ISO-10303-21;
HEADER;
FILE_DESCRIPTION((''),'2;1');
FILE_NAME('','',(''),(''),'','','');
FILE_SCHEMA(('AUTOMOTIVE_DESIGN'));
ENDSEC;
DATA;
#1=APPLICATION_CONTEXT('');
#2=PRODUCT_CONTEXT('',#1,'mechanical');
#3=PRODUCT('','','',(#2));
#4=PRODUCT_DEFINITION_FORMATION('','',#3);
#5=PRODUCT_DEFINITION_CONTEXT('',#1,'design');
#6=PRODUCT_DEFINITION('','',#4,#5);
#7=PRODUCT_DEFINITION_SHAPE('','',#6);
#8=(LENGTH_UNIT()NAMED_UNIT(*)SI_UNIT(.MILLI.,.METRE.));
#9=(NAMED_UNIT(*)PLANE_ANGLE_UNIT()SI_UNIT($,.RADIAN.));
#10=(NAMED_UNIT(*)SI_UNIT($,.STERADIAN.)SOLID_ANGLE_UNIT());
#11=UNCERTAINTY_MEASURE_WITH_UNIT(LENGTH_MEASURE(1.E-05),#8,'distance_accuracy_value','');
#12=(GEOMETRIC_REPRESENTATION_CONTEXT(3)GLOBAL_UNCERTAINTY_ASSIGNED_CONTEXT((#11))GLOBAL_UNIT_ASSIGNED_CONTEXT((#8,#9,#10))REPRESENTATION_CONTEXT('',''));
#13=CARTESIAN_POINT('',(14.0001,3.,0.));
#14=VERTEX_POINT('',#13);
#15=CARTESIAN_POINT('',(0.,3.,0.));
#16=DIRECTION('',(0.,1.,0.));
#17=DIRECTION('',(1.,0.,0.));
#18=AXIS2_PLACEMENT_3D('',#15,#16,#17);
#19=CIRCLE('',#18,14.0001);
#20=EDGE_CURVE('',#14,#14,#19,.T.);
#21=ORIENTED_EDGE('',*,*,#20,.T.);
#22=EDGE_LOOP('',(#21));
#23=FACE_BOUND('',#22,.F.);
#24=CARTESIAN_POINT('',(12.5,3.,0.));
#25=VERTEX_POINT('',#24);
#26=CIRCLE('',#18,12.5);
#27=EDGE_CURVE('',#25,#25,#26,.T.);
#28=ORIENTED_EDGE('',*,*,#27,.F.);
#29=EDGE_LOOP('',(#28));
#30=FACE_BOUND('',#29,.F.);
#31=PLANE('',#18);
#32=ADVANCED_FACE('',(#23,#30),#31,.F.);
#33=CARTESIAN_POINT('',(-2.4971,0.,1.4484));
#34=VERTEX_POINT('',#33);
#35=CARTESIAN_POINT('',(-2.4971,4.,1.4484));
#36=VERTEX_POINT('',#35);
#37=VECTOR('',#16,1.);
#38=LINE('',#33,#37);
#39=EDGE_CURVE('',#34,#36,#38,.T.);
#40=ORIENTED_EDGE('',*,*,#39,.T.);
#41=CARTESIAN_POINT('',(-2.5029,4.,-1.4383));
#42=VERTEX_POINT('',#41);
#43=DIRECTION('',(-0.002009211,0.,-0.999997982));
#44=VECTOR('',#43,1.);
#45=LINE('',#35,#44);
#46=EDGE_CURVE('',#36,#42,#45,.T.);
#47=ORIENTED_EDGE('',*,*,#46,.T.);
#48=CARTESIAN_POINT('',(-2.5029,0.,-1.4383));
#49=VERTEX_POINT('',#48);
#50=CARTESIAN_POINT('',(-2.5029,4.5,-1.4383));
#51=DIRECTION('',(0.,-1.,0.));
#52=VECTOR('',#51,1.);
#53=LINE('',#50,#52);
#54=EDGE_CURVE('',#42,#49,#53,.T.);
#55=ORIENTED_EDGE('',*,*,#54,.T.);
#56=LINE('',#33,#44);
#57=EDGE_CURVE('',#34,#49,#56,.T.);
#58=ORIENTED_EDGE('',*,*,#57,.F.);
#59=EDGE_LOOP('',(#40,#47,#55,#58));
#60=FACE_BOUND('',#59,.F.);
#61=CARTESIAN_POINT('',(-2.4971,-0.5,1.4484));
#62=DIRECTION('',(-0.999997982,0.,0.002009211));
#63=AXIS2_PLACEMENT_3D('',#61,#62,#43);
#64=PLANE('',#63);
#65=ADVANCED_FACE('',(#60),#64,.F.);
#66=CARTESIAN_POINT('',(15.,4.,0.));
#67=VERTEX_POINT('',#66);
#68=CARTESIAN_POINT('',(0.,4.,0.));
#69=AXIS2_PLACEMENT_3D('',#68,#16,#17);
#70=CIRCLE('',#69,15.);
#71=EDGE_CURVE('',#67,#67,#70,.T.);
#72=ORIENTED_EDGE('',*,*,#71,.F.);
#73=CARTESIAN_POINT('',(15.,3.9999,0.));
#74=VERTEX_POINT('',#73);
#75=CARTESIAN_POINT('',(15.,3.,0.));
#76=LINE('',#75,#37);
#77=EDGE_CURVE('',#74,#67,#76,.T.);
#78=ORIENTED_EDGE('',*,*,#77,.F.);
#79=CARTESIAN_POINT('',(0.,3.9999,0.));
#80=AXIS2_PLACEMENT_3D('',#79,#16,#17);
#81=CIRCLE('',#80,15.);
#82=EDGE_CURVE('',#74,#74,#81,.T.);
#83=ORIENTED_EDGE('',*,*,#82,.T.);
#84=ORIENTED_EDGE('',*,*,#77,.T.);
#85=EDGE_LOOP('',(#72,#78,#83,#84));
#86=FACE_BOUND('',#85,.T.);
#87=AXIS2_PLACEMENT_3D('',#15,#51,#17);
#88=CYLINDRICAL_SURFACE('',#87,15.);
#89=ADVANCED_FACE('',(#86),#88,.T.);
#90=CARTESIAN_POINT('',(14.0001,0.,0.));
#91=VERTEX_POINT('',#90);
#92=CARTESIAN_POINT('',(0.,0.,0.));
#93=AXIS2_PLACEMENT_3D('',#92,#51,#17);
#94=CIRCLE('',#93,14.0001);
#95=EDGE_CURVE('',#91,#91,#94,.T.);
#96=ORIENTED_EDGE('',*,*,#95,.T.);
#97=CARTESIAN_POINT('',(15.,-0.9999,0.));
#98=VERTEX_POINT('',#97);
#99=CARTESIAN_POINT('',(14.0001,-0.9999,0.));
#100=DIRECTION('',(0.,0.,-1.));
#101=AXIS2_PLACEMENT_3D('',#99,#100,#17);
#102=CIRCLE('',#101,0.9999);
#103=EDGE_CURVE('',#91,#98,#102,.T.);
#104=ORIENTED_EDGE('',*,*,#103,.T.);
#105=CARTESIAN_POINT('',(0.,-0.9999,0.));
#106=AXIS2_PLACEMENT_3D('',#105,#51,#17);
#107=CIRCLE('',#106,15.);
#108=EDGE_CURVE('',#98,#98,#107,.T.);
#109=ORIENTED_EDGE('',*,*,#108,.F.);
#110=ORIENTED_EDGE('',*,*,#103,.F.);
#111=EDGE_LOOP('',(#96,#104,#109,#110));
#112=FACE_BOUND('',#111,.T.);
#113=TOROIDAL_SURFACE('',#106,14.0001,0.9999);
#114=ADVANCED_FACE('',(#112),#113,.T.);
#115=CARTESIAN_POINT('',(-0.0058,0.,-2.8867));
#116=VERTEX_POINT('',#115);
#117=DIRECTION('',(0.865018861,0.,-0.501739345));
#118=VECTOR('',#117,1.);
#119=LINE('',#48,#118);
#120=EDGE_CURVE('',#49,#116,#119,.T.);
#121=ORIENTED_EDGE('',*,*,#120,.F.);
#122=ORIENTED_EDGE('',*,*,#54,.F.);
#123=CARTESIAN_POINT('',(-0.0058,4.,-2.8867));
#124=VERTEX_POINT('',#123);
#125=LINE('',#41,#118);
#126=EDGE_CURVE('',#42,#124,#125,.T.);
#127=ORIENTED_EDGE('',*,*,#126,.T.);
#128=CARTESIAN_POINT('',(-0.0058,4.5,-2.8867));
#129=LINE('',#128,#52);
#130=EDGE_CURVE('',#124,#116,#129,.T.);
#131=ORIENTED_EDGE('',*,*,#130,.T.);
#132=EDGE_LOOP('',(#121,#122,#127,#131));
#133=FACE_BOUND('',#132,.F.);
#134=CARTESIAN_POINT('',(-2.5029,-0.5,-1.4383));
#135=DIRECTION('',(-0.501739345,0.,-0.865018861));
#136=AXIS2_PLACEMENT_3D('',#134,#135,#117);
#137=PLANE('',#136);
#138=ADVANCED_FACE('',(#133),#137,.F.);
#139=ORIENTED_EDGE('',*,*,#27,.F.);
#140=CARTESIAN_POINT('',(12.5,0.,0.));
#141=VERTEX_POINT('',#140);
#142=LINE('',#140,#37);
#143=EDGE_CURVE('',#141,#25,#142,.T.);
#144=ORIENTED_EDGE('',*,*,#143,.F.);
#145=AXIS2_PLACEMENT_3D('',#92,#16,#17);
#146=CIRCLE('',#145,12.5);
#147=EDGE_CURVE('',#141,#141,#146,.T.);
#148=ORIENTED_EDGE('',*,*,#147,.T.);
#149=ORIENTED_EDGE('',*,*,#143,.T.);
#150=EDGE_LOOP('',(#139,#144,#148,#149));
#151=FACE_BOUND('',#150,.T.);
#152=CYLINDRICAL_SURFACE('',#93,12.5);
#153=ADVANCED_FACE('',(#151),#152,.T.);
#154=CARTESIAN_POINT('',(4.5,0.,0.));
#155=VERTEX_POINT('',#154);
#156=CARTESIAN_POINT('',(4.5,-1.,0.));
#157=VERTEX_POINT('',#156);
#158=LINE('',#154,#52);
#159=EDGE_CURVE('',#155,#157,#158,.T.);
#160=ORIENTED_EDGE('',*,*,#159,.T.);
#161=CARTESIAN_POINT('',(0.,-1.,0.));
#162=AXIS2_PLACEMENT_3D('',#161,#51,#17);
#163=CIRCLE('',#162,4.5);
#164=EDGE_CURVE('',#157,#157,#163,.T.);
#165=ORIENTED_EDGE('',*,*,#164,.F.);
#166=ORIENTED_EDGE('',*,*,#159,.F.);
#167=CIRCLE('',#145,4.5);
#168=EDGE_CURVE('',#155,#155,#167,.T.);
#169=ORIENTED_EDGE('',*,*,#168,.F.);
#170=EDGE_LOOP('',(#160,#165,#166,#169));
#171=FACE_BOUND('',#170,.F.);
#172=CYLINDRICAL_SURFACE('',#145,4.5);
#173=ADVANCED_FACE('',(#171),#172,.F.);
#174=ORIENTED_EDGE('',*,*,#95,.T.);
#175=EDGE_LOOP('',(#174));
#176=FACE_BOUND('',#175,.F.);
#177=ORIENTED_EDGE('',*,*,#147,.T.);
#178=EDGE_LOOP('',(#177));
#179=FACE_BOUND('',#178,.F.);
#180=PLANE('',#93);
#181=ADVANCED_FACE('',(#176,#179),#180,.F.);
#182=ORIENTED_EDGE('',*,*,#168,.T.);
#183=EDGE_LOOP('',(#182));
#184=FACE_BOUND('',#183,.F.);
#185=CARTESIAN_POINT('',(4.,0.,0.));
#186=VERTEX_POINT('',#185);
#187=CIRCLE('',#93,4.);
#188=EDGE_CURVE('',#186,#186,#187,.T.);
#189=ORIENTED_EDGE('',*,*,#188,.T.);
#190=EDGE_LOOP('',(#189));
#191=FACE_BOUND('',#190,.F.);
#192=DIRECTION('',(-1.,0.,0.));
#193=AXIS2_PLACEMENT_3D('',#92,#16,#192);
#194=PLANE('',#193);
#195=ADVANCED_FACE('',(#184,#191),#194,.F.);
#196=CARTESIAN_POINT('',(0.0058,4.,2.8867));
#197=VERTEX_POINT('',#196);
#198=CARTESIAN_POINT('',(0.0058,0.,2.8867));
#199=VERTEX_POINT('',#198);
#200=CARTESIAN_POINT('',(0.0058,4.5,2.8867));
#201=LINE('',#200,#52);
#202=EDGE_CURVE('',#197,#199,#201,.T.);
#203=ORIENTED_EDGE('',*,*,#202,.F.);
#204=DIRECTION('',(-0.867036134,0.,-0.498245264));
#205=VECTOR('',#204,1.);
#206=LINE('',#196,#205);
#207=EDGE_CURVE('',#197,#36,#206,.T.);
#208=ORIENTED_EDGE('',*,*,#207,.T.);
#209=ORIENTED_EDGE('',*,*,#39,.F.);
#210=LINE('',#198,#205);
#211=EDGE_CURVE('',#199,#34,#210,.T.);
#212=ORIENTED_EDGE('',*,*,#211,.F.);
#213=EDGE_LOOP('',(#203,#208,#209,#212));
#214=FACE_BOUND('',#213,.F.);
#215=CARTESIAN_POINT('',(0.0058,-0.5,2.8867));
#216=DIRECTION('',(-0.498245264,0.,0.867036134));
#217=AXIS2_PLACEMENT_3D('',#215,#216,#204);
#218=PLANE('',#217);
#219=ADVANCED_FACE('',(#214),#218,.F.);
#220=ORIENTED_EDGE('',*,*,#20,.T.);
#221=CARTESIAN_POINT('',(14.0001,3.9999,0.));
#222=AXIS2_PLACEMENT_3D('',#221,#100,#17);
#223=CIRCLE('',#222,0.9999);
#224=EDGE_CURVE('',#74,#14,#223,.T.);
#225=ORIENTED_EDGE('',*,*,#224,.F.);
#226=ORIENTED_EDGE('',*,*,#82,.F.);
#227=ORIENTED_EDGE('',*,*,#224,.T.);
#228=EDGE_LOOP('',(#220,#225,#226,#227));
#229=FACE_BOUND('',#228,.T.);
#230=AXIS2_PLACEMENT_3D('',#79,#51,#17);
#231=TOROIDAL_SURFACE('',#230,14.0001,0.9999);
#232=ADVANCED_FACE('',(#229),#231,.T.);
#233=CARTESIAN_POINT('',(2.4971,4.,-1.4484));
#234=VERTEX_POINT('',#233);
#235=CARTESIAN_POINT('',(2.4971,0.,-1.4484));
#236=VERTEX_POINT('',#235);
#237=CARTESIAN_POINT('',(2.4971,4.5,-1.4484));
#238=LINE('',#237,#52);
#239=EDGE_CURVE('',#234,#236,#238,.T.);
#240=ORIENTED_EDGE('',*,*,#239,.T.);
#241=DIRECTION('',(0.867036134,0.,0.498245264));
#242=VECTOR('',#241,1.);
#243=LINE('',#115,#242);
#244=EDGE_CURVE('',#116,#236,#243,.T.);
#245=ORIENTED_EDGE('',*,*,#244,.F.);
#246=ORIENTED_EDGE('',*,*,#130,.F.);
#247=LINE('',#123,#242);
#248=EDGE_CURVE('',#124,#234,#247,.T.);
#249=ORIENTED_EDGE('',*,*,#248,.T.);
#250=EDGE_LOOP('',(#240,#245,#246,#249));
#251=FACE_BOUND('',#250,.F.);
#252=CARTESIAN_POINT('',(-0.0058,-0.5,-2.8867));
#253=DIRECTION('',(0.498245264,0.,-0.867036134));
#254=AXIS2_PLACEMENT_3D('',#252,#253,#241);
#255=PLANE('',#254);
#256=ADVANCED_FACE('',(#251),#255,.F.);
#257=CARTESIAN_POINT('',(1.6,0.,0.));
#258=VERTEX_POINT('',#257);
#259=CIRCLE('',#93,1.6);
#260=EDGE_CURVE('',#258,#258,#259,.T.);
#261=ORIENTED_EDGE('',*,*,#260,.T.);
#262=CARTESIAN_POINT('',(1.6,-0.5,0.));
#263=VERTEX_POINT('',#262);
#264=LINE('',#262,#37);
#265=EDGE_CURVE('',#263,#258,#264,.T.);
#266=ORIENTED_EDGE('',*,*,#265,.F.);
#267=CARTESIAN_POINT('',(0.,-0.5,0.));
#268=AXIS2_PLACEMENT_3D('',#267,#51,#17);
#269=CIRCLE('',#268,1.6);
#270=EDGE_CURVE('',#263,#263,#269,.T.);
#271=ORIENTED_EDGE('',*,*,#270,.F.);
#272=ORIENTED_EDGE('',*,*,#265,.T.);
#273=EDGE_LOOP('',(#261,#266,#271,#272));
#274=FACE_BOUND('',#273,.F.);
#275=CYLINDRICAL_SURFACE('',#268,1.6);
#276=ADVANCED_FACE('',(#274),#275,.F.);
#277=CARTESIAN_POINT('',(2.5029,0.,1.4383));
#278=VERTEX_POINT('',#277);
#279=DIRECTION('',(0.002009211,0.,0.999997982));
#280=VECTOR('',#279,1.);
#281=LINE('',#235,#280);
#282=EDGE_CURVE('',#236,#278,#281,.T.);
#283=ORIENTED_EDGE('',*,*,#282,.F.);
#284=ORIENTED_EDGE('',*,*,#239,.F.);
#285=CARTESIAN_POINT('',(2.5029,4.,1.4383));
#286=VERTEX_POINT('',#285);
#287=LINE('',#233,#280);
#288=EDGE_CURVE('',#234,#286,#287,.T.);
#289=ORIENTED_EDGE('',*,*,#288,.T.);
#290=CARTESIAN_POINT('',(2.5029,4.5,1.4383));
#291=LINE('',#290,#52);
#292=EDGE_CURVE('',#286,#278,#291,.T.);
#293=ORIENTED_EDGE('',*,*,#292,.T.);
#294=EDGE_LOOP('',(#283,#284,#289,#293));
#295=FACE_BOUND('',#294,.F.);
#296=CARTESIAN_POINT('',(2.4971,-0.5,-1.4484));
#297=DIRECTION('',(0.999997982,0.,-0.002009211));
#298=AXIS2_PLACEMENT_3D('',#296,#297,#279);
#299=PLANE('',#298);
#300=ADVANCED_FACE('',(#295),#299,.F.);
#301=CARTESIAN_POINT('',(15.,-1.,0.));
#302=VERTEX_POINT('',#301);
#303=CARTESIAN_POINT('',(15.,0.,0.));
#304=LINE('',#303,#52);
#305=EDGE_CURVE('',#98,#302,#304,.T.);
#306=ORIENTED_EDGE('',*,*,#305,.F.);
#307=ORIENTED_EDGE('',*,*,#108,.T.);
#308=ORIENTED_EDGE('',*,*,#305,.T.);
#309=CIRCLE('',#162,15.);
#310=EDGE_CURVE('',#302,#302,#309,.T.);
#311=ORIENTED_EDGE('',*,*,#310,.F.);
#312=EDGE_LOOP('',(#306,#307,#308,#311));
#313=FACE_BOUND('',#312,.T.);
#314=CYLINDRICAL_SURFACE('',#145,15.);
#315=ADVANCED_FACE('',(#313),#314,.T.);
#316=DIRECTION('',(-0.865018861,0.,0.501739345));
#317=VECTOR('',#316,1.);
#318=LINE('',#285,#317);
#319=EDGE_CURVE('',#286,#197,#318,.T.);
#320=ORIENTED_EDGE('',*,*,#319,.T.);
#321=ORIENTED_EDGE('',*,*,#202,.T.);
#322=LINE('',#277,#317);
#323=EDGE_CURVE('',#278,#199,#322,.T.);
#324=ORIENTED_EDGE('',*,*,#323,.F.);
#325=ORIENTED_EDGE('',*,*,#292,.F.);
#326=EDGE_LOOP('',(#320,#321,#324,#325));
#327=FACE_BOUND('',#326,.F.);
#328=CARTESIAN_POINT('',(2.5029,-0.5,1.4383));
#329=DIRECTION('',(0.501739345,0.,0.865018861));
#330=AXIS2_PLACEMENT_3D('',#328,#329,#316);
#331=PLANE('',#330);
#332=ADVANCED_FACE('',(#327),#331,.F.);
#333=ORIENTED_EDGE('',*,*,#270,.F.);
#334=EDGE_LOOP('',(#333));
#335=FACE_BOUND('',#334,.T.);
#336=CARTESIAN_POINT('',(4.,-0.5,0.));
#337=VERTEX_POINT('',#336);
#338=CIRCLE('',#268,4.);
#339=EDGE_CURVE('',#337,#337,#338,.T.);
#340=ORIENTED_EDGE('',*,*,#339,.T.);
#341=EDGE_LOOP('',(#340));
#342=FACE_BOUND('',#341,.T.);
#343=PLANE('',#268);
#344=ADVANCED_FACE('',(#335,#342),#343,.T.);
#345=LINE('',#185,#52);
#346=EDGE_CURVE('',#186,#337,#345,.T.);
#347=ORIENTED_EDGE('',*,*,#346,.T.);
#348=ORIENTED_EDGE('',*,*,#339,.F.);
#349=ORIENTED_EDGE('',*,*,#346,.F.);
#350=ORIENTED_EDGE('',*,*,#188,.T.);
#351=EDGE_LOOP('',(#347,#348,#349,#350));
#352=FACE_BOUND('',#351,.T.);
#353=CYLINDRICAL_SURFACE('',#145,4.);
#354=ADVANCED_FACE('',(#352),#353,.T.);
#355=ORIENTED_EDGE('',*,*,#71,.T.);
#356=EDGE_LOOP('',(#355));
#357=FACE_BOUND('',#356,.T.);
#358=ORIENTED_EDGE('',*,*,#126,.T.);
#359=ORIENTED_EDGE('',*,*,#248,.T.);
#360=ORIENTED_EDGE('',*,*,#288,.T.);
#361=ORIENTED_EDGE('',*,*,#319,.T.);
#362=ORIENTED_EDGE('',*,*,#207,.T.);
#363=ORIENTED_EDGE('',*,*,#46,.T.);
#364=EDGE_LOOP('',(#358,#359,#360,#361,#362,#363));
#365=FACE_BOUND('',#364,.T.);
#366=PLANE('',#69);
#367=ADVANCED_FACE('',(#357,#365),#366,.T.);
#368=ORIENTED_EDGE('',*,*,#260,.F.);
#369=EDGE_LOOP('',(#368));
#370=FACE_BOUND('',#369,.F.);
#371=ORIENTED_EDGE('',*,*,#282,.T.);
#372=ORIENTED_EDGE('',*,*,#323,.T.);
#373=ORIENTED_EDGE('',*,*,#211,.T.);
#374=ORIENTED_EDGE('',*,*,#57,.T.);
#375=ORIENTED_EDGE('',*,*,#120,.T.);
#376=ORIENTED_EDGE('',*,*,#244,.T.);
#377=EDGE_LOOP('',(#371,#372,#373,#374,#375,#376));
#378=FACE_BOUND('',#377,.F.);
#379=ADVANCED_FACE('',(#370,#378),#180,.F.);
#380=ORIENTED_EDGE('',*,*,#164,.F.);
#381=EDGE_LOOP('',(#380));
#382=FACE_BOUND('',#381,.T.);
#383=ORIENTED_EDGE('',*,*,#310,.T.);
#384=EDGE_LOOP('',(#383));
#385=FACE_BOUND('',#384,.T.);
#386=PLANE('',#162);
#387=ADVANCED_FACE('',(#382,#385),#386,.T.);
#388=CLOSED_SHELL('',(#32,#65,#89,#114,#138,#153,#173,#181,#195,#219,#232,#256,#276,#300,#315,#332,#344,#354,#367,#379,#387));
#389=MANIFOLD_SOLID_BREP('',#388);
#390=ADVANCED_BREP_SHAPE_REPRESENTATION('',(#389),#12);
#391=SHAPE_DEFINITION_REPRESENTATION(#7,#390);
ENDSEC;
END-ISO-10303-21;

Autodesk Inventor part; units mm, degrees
ref_plane "YZ Plane" through (0, 0, 0) normal (1, 0, 0) x (0, 1, 0)
ref_plane "XZ Plane" through (0, 0, 0) normal (0, 1, 0) x (-1, 0, 0)
ref_plane "XY Plane" through (0, 0, 0) normal (0, 0, 1) x (1, 0, 0)
sketch "스케치1" plane through (0, 0, 0) normal (0, 1, 0) x (-1, 0, 0)
  line L0 (2.4971, 1.4484) -> (2.5029, -1.4383)
  line L1 (2.5029, -1.4383) -> (0.0058, -2.8867)
  line L2 (0.0058, -2.8867) -> (-2.4971, -1.4484)
  line L3 (-2.4971, -1.4484) -> (-2.5029, 1.4383)
  line L4 (-2.5029, 1.4383) -> (-0.0058, 2.8867)
  line L5 (-0.0058, 2.8867) -> (2.4971, 1.4484)
  circle A0 centre (0, 0) radius 4.5
  circle A1 centre (0, 0) radius 15
  circle A2 centre (0, 0) radius 12.5
  dimension "d0" = 5
  dimension "d1" = 9
  dimension "d2" = 30
  dimension "d3" = 25
extrude "돌출1" add sketch "스케치1" along normal blind 5 contours A0
sketch "스케치2" plane through (0, 0, 0) normal (0, -1, 0) x (1, 0, 0)
  circle A0 centre (0, 0) radius 15
  circle A1 centre (0, 0) radius 4.5 projected
  dimension "d6" = 30
extrude "돌출2" add sketch "스케치2" along normal blind 1
sketch "스케치3" plane through (0, 0, 0) normal (0, 1, 0) x (1, 0, 0)
  circle A0 centre (0, 0) radius 12.5
  circle A1 centre (0, 0) radius 4.5 projected
  dimension "d9" = 25
extrude "돌출3" add sketch "스케치3" along normal blind 3
sketch "스케치4" plane through (0, 3, 0) normal (0, 1, 0) x (1, 0, 0)
  circle A0 centre (0, 0) radius 15
  circle A1 centre (0, 0) radius 4.5 projected
  dimension "d12" = 30
extrude "돌출4" add sketch "스케치4" along normal blind 1
fillet "모깎기1" radius 1 2 edges at (-15, 0, 0) (-15, 3, 0)
sketch "스케치5" plane through (0, 0, 0) normal (0, -1, 0) x (1, 0, 0)
  circle A0 centre (0, 0) radius 4
  line L0 (-0.0058, -2.8867) -> (-2.5029, -1.4383) projected
  line L1 (-2.5029, -1.4383) -> (-2.4971, 1.4484) projected
  line L2 (-2.4971, 1.4484) -> (0.0058, 2.8867) projected
  line L3 (0.0058, 2.8867) -> (2.5029, 1.4383) projected
  line L4 (2.5029, 1.4383) -> (2.4971, -1.4484) projected
  line L5 (2.4971, -1.4484) -> (-0.0058, -2.8867) projected
  circle A1 centre (0, 0) radius 4.5 projected
  line L6 (-2.5029, -1.4383) -> (-2.4971, 1.4484) projected
  circle A2 centre (0, 0) radius 4.5 projected
  dimension "d16" = 8
extrude "돌출5" add sketch "스케치5" along normal blind 0.5 contours A0 | L0 L1 L2 L3 L4 L5
sketch "스케치6" plane through (0, -0.5, 0) normal (0, -1, 0) x (1, 0, 0)
  circle A0 centre (0, 0) radius 1.6
  dimension "d19" = 3.2
extrude "돌출6" cut sketch "스케치6" against normal blind 0.5
sketch "스케치7" plane through (0.0058, 0, 2.8867) normal (-0.5017425, 0, -0.8650171) x (-0.8650171, 0, 0.5017425)
  point P0 (-1.4434, 0)
sketch "스케치8" plane through (0, -1, 0) normal (0, -1, 0) x (1, 0, 0)
  point P0 (0, 0)
sketch "스케치9" plane through (0, -1, 0) normal (0, -1, 0) x (1, 0, 0)
  line L0 (-2.5029, -1.4383) -> (-0.0058, -2.8867) projected
  line L1 (-0.0058, -2.8867) -> (2.4971, -1.4484) projected
  line L2 (2.4971, -1.4484) -> (2.5029, 1.4383) projected
  line L3 (2.5029, 1.4383) -> (0.0058, 2.8867) projected
  line L4 (0.0058, 2.8867) -> (-2.4971, 1.4484) projected
  line L5 (-2.4971, 1.4484) -> (-2.5029, -1.4383) projected
  circle A0 centre (0, 0) radius 4.5 projected
  circle A1 centre (0, 0) radius 4.5 projected
  circle A2 centre (0, 0) radius 15 projected
  circle A3 centre (0, 0) radius 4.5 projected
move faces "이동1" translate (0, -0.5, 0) faces at (-3.1667, 5, 0.0034) (-4.4417, 4.3333, -0.7219)
move faces "이동2" translate (0, -0.5, 0) faces at (-3.1667, 4.5, 0.0034)
sketch "스케치10" plane through (0.0058, 0, 2.8867) normal (-0.5017425, 0, -0.8650171) x (-0.8650171, 0, 0.5017425)
  point P0 (-1.4434, 0)
sketch "스케치11" plane through (0, 4, 0) normal (0, 1, 0) x (1, 0, 0)
  line L0 (-0.0058, 2.8867) -> (2.4971, 1.4484) projected
  line L1 (0.0058, -2.8867) -> (-2.4971, -1.4484) projected
  point P0 (0, 0)
  dimension "d28" = 5
properties part number "모터기어"
